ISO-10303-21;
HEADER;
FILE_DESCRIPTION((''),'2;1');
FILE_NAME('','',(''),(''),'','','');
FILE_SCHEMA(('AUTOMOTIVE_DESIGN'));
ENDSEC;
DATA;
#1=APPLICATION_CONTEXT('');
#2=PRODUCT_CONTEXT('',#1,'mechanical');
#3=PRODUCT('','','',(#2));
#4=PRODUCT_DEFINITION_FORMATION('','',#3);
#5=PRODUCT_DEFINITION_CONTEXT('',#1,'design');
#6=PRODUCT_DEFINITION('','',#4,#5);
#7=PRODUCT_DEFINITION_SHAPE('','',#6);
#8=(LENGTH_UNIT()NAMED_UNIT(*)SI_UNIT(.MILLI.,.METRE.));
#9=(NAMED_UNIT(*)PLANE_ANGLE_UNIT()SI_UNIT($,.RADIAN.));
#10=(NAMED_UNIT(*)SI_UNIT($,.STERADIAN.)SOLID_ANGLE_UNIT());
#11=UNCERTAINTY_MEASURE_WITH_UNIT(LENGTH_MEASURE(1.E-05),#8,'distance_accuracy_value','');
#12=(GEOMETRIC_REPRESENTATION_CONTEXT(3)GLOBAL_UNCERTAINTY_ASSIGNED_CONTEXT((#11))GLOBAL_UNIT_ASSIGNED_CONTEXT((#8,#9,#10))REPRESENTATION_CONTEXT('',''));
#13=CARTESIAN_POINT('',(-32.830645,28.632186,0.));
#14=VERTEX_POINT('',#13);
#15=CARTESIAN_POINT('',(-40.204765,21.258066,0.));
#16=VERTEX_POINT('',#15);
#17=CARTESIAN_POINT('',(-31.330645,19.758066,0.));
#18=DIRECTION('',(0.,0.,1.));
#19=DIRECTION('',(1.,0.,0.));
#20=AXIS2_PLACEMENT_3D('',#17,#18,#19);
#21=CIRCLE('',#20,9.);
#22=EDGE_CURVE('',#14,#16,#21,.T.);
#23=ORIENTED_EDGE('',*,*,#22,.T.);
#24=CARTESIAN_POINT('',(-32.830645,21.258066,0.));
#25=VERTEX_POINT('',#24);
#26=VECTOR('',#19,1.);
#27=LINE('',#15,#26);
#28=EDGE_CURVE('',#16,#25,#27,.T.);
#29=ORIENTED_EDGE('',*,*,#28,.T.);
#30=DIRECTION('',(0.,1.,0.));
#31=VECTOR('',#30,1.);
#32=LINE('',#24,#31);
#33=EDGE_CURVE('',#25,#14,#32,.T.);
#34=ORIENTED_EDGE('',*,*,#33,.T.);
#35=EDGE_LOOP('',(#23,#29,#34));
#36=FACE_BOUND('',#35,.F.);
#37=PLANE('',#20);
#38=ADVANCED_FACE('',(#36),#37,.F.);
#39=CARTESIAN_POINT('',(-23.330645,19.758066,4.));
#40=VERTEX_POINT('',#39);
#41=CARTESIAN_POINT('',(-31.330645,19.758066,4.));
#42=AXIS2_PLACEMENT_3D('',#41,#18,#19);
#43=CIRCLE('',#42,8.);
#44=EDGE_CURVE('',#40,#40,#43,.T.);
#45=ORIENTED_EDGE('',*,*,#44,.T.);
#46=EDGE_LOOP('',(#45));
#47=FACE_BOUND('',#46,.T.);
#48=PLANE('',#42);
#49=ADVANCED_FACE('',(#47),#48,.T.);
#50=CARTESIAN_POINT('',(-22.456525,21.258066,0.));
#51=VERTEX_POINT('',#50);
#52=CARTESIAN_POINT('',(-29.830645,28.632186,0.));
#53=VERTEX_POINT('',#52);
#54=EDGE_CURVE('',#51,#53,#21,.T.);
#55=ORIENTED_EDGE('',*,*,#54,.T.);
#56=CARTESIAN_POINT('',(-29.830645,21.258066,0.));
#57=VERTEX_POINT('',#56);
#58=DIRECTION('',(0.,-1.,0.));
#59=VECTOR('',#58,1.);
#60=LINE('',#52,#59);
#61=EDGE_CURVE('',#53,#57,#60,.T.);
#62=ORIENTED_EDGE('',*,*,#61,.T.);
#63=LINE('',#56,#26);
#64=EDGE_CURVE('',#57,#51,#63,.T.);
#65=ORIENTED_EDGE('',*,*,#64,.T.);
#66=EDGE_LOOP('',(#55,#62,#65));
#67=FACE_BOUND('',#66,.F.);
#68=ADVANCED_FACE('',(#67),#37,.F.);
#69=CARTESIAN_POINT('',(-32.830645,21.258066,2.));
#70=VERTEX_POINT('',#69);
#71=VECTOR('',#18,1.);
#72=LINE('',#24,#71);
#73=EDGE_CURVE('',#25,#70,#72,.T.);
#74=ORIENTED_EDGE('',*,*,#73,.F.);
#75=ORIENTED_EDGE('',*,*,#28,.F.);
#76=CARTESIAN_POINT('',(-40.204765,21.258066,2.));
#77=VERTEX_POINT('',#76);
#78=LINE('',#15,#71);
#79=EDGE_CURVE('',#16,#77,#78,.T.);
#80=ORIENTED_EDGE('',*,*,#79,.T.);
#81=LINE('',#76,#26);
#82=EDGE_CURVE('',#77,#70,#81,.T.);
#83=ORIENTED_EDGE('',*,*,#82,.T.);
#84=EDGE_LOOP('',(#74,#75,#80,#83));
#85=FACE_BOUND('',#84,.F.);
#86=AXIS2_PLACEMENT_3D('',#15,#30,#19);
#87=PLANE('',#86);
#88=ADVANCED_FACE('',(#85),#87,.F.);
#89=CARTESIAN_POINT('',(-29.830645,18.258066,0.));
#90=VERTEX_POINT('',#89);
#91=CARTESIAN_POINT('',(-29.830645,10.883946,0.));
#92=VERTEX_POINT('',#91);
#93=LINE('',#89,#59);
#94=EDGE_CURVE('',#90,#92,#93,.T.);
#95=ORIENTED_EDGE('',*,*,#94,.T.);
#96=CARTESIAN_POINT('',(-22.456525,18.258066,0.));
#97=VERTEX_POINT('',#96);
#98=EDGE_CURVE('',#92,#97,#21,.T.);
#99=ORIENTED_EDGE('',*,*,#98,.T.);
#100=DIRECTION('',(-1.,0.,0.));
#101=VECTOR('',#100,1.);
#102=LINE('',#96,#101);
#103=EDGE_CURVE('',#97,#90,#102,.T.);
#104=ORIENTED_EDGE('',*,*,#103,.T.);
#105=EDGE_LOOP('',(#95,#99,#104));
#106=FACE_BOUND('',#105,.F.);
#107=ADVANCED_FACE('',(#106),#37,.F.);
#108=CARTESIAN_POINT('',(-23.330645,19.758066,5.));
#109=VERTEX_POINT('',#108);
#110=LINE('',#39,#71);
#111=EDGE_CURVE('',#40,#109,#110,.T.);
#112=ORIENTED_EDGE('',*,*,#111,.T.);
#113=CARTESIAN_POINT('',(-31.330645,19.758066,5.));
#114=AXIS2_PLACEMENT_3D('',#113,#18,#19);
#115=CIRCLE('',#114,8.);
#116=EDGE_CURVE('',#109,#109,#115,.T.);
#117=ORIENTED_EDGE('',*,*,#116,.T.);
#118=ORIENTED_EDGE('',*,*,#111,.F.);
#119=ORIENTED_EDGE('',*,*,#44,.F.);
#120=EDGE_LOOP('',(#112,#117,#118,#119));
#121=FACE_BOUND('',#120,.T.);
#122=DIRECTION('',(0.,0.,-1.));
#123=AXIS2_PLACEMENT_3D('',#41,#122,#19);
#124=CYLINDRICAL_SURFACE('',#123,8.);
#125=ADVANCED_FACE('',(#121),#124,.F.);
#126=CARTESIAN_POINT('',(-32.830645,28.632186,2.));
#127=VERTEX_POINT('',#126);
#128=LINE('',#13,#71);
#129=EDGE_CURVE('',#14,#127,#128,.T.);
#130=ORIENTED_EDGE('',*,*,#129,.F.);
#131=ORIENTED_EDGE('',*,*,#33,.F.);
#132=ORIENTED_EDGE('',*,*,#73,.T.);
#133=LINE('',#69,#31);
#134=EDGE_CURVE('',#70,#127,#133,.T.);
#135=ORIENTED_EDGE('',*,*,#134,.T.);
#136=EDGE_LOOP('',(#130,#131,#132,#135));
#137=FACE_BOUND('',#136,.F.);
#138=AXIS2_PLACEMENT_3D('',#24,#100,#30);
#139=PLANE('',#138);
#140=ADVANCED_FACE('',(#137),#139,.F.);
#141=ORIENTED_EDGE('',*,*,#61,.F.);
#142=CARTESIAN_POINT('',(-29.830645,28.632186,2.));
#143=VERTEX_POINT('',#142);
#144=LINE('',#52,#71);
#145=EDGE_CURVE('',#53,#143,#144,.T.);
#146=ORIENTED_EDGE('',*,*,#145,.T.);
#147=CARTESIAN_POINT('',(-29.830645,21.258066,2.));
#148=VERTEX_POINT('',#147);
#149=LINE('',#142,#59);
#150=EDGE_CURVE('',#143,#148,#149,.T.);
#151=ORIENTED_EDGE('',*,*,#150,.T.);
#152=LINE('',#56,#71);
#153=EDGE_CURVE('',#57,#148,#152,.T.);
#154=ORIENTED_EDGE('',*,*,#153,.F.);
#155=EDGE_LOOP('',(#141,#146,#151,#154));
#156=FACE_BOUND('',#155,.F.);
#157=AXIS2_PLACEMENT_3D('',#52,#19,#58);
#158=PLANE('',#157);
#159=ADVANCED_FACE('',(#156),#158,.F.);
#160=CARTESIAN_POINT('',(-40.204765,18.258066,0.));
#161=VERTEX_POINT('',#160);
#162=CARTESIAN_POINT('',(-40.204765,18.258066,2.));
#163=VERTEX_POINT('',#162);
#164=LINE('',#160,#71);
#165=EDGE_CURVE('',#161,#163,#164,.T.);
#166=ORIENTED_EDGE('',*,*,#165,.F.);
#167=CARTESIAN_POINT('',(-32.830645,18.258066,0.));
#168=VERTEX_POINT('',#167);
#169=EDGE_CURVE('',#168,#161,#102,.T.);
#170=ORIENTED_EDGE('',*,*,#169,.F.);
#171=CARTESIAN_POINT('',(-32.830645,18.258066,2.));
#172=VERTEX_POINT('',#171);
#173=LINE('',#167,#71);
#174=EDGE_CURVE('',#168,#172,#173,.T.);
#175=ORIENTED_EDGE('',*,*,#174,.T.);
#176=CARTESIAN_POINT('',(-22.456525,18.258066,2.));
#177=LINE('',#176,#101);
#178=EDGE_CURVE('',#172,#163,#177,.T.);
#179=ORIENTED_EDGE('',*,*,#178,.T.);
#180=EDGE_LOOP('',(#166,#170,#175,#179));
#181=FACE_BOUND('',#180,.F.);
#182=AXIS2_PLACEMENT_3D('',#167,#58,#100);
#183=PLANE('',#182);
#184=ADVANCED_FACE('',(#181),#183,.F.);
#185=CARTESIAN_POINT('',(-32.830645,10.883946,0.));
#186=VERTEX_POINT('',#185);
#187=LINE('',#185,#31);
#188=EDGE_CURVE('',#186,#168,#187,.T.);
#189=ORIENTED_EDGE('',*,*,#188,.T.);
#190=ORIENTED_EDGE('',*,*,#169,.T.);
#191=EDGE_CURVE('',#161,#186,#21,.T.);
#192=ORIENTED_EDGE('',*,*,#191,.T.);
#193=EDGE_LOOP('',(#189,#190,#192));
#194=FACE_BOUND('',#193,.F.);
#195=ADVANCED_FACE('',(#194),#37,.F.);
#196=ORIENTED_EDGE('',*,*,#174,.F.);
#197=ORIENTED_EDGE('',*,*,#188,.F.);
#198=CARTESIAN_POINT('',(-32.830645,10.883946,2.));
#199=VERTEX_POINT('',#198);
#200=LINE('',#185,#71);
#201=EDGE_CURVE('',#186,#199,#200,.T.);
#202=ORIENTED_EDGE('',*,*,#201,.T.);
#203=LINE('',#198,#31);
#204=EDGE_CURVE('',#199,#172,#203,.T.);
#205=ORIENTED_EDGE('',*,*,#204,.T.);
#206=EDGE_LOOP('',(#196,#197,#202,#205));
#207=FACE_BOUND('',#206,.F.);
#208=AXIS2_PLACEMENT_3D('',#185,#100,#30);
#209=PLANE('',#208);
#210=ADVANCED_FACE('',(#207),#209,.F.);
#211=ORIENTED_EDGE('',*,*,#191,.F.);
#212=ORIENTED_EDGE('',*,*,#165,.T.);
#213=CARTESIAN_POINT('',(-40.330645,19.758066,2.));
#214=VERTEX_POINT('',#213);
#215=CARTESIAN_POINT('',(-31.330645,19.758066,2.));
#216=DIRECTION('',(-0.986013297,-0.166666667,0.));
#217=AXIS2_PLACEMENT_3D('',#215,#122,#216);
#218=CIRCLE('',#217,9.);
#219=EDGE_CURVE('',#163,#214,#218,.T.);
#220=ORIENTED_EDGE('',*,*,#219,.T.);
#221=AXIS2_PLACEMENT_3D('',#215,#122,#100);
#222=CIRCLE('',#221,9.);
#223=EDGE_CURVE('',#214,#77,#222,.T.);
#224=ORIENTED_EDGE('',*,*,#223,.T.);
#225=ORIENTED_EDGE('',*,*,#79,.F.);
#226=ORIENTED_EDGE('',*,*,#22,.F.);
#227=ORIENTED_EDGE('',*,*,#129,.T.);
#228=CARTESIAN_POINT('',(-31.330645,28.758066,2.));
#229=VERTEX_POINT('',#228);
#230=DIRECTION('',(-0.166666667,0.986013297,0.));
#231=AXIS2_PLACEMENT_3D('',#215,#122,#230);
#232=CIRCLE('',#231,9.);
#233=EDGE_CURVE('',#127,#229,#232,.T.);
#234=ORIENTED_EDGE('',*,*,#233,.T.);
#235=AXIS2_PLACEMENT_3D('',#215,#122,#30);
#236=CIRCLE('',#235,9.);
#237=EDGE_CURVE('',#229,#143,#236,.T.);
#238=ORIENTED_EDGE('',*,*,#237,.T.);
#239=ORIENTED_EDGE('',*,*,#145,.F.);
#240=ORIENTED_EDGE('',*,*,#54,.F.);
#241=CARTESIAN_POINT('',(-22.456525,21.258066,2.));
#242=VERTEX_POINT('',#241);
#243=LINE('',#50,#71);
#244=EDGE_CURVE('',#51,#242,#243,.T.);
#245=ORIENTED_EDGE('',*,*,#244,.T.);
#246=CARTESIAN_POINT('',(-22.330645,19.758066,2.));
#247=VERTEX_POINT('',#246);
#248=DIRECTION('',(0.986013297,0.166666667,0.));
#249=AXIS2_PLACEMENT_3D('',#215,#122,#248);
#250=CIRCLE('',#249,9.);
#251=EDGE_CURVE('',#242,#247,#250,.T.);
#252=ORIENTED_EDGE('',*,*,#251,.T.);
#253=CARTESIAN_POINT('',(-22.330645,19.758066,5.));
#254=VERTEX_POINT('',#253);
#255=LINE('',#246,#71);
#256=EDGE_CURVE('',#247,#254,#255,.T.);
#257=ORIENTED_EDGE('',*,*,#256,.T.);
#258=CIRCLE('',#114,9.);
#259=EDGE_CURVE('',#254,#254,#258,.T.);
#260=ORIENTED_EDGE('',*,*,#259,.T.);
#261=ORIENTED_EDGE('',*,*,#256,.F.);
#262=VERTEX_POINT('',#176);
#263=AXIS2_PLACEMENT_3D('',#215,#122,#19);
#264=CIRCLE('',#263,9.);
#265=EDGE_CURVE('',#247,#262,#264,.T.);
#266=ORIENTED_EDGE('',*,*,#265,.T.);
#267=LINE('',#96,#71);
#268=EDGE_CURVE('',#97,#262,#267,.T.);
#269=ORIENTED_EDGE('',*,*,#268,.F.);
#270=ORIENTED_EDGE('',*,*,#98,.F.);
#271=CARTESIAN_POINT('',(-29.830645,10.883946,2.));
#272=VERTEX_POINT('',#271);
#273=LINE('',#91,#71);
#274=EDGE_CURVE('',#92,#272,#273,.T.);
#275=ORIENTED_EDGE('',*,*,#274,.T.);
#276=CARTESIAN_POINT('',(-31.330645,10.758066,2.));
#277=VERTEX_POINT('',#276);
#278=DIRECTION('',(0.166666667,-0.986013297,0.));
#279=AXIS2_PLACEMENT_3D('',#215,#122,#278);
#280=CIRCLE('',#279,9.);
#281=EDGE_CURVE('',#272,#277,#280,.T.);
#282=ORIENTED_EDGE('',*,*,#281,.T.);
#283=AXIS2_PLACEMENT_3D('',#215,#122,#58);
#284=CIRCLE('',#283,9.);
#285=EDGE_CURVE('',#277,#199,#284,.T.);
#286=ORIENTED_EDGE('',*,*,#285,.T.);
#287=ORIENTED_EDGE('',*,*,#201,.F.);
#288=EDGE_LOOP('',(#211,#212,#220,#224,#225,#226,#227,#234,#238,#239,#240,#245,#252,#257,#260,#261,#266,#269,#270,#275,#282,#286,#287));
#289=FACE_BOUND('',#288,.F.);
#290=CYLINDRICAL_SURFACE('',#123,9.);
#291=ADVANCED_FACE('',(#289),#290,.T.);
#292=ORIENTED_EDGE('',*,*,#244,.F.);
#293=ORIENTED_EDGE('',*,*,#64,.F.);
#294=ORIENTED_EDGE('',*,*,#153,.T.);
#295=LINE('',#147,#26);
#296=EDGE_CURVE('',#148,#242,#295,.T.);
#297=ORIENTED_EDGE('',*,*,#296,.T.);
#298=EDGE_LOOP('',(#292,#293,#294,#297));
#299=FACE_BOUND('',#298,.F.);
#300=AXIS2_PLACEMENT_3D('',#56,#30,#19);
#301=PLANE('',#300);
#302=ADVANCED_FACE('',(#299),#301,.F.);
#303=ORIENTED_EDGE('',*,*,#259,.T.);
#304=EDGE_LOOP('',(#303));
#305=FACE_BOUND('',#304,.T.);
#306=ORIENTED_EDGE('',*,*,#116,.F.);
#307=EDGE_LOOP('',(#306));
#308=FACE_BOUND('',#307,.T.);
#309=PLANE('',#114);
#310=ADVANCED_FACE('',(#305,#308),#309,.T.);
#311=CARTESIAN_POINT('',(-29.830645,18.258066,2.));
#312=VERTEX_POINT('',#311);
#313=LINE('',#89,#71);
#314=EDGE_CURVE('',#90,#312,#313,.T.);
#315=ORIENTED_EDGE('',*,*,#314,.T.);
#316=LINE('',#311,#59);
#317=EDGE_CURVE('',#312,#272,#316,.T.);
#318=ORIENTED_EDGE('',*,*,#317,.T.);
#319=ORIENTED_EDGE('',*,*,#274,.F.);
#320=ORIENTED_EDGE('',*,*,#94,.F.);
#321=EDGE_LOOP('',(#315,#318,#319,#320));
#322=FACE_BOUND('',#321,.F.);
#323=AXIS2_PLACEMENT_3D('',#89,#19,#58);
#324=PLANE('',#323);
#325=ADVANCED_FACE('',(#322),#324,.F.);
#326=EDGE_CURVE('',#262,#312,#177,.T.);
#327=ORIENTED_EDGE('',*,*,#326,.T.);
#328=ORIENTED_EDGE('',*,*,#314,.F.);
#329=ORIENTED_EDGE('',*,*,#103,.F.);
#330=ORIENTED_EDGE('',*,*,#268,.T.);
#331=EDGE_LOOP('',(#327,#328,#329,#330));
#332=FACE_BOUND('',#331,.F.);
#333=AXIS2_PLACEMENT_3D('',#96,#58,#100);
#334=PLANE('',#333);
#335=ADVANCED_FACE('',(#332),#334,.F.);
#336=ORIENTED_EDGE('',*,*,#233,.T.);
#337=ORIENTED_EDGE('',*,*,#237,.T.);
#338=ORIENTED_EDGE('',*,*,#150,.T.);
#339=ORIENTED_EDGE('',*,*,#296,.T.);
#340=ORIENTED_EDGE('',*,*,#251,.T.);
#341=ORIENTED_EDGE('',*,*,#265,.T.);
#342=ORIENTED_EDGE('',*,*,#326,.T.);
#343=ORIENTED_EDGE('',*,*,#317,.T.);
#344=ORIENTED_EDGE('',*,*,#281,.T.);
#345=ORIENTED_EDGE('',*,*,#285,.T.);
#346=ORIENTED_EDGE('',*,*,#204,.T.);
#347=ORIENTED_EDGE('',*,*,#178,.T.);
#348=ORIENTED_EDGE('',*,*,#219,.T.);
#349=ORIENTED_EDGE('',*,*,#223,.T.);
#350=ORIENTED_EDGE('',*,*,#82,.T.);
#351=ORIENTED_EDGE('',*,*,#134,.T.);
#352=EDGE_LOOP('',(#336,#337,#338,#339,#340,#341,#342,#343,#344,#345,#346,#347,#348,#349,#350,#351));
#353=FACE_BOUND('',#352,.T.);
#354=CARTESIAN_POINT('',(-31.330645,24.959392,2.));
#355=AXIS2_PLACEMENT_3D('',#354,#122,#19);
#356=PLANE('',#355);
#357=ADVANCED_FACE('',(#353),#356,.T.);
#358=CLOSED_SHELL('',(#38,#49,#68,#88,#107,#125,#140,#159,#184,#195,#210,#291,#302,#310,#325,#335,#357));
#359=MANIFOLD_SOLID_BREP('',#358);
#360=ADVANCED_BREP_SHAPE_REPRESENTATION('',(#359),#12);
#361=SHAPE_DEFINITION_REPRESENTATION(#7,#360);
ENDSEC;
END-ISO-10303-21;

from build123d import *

# Parameters (mm, degrees)
F0_R     = 9
F1_DEPTH = 4
F3_W     = 3
F3_H     = 3
F4_DEPTH = 2
F2_R     = 9
F2_R_2   = 8
F5_DEPTH = 1


# Not quite as in the source:
# - a feature names something its author has since deleted; it is built from what else it names


with BuildPart() as f1:
    # F0 (on Top) → F1 (new body)
    with BuildSketch(Plane.XY):
        with Locations((-31.3306450844, 19.7580661625)):
            Circle(F0_R)
    extrude(amount=F1_DEPTH)

    # F3 (on face) → F4 (cut)
    with BuildSketch(Plane(origin=(0, 0, 0), x_dir=(1, 0, 0), z_dir=(0, 0, -1))):
        with BuildLine():
            ThreePointArc((-32.8306450844, -28.6321858371), (-32.0832814269, -28.7265408676), (-31.3306450844, -28.7580661625))
            ThreePointArc((-31.3306450844, -28.7580661625), (-30.5780087419, -28.7265408676), (-29.8306450844, -28.6321858371))
            Line((-29.8306450844, -28.6321858371), (-29.8306450844, -21.2580661625))
            Line((-29.8306450844, -21.2580661625), (-32.8306450844, -21.2580661625))
            Line((-32.8306450844, -21.2580661625), (-32.8306450844, -28.6321858371))
        make_face()
        with BuildLine():
            ThreePointArc((-40.204764759, -18.2580661625), (-40.2991197895, -19.0054298199), (-40.3306450844, -19.7580661625))
            ThreePointArc((-40.3306450844, -19.7580661625), (-40.2991197895, -20.510702505), (-40.204764759, -21.2580661625))
            Line((-40.204764759, -21.2580661625), (-32.8306450844, -21.2580661625))
            Line((-32.8306450844, -21.2580661625), (-32.8306450844, -18.2580661625))
            Line((-32.8306450844, -18.2580661625), (-40.204764759, -18.2580661625))
        make_face()
        with Locations((-31.3306450844, -19.7580661625)):
            Rectangle(F3_W, F3_H)
        with BuildLine():
            Line((-29.8306450844, -18.2580661625), (-29.8306450844, -21.2580661625))
            Line((-29.8306450844, -21.2580661625), (-22.4565254097, -21.2580661625))
            ThreePointArc((-22.4565254097, -21.2580661625), (-22.3621703793, -20.510702505), (-22.3306450844, -19.7580661625))
            ThreePointArc((-22.3306450844, -19.7580661625), (-22.3621703793, -19.0054298199), (-22.4565254097, -18.2580661625))
            Line((-22.4565254097, -18.2580661625), (-29.8306450844, -18.2580661625))
        make_face()
        with BuildLine():
            Line((-32.8306450844, -10.8839464878), (-32.8306450844, -18.2580661625))
            Line((-32.8306450844, -18.2580661625), (-29.8306450844, -18.2580661625))
            Line((-29.8306450844, -18.2580661625), (-29.8306450844, -10.8839464878))
            ThreePointArc((-29.8306450844, -10.8839464878), (-30.5780087419, -10.7895914574), (-31.3306450844, -10.7580661625))
            ThreePointArc((-31.3306450844, -10.7580661625), (-32.0832814269, -10.7895914574), (-32.8306450844, -10.8839464878))
        make_face()
    extrude(amount=-F4_DEPTH, mode=Mode.SUBTRACT)

    # F2 (on face) → F5 (join)
    with BuildSketch(Plane.XY.offset(4)):
        with Locations((-31.3306450844, 19.7580661625)):
            Circle(F2_R)
        with Locations((-31.3306450844, 19.7580661625)):
            Circle(F2_R_2, mode=Mode.SUBTRACT)
    extrude(amount=F5_DEPTH)


solid = f1.part
